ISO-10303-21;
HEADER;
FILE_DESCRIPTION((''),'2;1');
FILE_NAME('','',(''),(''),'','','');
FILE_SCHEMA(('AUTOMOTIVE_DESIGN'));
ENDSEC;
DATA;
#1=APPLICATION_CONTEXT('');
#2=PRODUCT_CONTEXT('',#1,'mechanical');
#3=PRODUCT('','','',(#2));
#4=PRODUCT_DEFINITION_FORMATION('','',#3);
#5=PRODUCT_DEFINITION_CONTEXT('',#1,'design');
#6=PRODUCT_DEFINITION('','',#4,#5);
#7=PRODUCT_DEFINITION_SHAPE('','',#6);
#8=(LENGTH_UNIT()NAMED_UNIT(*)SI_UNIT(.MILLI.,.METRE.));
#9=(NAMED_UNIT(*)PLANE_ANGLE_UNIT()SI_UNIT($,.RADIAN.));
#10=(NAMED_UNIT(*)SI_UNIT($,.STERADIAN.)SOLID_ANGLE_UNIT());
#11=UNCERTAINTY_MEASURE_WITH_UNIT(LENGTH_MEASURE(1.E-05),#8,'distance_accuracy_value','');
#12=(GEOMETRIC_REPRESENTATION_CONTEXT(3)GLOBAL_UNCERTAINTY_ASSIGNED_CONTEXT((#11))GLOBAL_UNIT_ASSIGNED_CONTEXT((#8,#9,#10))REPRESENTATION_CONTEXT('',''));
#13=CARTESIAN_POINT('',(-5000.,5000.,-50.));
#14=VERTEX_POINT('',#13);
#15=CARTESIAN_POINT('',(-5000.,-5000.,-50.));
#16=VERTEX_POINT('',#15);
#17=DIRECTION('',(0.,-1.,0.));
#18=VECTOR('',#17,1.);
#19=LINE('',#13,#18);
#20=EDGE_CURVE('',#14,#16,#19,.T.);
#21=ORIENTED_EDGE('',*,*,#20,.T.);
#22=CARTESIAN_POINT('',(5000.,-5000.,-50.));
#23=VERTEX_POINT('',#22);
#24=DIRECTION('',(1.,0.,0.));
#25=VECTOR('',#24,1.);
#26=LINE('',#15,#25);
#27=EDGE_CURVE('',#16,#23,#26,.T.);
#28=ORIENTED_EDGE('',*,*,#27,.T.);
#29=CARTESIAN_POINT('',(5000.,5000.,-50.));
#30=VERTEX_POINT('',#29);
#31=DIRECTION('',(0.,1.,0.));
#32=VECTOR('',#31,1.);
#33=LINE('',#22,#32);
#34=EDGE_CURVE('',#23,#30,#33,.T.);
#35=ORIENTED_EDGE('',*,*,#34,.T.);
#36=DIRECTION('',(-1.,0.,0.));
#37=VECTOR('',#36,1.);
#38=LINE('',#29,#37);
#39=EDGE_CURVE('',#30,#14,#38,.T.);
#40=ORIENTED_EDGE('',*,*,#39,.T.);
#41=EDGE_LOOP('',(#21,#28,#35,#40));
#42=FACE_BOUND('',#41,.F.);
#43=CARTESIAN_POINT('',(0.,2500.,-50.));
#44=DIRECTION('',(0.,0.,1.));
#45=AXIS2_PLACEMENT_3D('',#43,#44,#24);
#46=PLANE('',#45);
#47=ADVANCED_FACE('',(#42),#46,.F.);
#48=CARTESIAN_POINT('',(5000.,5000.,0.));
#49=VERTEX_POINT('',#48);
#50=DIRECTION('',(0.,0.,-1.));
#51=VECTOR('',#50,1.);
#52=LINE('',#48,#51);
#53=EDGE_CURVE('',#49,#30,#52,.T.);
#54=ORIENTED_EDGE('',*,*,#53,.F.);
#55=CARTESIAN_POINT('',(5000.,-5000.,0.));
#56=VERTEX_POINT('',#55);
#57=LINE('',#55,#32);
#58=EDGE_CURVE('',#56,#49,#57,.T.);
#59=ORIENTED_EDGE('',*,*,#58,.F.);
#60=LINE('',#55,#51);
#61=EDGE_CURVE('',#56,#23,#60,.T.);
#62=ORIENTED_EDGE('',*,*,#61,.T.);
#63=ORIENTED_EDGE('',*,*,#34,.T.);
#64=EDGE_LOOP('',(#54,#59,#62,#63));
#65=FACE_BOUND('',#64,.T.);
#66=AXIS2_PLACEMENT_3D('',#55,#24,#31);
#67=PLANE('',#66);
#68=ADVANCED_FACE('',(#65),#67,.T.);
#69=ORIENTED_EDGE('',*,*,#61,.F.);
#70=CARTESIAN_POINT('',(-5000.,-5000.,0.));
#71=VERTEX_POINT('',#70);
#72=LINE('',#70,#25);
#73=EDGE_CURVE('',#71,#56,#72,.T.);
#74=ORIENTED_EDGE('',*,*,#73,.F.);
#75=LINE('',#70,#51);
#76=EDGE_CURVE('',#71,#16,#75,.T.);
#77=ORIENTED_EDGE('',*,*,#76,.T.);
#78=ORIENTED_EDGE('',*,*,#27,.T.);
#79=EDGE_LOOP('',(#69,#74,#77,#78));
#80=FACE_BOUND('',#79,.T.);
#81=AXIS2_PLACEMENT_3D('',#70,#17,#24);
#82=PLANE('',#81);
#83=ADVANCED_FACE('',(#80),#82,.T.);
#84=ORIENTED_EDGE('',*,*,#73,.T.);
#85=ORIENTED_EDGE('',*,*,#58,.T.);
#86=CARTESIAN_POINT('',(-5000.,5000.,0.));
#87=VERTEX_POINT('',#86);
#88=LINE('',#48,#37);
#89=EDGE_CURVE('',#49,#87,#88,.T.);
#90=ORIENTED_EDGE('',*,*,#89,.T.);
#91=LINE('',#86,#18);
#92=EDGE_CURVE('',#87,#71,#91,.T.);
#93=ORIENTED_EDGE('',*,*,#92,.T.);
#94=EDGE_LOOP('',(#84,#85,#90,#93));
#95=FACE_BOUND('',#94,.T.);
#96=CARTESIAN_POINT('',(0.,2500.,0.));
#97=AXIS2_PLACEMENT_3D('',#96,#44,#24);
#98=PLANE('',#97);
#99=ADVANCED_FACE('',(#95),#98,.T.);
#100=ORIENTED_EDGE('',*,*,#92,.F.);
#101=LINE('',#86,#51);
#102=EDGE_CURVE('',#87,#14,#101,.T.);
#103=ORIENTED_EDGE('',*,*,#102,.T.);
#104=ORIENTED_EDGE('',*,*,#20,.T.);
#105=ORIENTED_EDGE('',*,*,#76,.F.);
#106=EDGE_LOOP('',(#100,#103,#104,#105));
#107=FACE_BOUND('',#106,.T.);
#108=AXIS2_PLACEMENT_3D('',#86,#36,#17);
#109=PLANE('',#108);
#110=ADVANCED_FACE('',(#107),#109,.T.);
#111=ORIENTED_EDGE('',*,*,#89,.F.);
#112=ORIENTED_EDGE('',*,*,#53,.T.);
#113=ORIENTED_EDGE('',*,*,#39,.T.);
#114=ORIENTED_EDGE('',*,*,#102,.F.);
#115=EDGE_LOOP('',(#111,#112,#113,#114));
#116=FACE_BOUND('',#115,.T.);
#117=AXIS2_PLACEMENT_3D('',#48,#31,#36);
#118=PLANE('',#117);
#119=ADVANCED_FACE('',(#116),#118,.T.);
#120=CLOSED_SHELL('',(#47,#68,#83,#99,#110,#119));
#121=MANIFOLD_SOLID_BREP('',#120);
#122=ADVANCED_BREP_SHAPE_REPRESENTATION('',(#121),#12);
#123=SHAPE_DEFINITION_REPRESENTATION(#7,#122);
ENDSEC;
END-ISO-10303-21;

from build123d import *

# Parameters (mm, degrees)
F1_DEPTH = 50


# Not quite as in the source:
# - the program builds the solid bodies; features that only make, move or delete a surface that nothing else refers to are left out


with BuildPart() as f1:
    # F0 (on Top) → F1 (new body)
    with BuildSketch(Plane.XY):
        Polygon((5000, 5000), (-5000, 5000), (-5000, 0), (-2000, 0), (5000, 0), align=None)
        Polygon((-2000, 0), (-5000, 0), (-5000, -5000), (5000, -5000), (5000, 0), align=None)
    extrude(amount=-F1_DEPTH)


solid = f1.part
